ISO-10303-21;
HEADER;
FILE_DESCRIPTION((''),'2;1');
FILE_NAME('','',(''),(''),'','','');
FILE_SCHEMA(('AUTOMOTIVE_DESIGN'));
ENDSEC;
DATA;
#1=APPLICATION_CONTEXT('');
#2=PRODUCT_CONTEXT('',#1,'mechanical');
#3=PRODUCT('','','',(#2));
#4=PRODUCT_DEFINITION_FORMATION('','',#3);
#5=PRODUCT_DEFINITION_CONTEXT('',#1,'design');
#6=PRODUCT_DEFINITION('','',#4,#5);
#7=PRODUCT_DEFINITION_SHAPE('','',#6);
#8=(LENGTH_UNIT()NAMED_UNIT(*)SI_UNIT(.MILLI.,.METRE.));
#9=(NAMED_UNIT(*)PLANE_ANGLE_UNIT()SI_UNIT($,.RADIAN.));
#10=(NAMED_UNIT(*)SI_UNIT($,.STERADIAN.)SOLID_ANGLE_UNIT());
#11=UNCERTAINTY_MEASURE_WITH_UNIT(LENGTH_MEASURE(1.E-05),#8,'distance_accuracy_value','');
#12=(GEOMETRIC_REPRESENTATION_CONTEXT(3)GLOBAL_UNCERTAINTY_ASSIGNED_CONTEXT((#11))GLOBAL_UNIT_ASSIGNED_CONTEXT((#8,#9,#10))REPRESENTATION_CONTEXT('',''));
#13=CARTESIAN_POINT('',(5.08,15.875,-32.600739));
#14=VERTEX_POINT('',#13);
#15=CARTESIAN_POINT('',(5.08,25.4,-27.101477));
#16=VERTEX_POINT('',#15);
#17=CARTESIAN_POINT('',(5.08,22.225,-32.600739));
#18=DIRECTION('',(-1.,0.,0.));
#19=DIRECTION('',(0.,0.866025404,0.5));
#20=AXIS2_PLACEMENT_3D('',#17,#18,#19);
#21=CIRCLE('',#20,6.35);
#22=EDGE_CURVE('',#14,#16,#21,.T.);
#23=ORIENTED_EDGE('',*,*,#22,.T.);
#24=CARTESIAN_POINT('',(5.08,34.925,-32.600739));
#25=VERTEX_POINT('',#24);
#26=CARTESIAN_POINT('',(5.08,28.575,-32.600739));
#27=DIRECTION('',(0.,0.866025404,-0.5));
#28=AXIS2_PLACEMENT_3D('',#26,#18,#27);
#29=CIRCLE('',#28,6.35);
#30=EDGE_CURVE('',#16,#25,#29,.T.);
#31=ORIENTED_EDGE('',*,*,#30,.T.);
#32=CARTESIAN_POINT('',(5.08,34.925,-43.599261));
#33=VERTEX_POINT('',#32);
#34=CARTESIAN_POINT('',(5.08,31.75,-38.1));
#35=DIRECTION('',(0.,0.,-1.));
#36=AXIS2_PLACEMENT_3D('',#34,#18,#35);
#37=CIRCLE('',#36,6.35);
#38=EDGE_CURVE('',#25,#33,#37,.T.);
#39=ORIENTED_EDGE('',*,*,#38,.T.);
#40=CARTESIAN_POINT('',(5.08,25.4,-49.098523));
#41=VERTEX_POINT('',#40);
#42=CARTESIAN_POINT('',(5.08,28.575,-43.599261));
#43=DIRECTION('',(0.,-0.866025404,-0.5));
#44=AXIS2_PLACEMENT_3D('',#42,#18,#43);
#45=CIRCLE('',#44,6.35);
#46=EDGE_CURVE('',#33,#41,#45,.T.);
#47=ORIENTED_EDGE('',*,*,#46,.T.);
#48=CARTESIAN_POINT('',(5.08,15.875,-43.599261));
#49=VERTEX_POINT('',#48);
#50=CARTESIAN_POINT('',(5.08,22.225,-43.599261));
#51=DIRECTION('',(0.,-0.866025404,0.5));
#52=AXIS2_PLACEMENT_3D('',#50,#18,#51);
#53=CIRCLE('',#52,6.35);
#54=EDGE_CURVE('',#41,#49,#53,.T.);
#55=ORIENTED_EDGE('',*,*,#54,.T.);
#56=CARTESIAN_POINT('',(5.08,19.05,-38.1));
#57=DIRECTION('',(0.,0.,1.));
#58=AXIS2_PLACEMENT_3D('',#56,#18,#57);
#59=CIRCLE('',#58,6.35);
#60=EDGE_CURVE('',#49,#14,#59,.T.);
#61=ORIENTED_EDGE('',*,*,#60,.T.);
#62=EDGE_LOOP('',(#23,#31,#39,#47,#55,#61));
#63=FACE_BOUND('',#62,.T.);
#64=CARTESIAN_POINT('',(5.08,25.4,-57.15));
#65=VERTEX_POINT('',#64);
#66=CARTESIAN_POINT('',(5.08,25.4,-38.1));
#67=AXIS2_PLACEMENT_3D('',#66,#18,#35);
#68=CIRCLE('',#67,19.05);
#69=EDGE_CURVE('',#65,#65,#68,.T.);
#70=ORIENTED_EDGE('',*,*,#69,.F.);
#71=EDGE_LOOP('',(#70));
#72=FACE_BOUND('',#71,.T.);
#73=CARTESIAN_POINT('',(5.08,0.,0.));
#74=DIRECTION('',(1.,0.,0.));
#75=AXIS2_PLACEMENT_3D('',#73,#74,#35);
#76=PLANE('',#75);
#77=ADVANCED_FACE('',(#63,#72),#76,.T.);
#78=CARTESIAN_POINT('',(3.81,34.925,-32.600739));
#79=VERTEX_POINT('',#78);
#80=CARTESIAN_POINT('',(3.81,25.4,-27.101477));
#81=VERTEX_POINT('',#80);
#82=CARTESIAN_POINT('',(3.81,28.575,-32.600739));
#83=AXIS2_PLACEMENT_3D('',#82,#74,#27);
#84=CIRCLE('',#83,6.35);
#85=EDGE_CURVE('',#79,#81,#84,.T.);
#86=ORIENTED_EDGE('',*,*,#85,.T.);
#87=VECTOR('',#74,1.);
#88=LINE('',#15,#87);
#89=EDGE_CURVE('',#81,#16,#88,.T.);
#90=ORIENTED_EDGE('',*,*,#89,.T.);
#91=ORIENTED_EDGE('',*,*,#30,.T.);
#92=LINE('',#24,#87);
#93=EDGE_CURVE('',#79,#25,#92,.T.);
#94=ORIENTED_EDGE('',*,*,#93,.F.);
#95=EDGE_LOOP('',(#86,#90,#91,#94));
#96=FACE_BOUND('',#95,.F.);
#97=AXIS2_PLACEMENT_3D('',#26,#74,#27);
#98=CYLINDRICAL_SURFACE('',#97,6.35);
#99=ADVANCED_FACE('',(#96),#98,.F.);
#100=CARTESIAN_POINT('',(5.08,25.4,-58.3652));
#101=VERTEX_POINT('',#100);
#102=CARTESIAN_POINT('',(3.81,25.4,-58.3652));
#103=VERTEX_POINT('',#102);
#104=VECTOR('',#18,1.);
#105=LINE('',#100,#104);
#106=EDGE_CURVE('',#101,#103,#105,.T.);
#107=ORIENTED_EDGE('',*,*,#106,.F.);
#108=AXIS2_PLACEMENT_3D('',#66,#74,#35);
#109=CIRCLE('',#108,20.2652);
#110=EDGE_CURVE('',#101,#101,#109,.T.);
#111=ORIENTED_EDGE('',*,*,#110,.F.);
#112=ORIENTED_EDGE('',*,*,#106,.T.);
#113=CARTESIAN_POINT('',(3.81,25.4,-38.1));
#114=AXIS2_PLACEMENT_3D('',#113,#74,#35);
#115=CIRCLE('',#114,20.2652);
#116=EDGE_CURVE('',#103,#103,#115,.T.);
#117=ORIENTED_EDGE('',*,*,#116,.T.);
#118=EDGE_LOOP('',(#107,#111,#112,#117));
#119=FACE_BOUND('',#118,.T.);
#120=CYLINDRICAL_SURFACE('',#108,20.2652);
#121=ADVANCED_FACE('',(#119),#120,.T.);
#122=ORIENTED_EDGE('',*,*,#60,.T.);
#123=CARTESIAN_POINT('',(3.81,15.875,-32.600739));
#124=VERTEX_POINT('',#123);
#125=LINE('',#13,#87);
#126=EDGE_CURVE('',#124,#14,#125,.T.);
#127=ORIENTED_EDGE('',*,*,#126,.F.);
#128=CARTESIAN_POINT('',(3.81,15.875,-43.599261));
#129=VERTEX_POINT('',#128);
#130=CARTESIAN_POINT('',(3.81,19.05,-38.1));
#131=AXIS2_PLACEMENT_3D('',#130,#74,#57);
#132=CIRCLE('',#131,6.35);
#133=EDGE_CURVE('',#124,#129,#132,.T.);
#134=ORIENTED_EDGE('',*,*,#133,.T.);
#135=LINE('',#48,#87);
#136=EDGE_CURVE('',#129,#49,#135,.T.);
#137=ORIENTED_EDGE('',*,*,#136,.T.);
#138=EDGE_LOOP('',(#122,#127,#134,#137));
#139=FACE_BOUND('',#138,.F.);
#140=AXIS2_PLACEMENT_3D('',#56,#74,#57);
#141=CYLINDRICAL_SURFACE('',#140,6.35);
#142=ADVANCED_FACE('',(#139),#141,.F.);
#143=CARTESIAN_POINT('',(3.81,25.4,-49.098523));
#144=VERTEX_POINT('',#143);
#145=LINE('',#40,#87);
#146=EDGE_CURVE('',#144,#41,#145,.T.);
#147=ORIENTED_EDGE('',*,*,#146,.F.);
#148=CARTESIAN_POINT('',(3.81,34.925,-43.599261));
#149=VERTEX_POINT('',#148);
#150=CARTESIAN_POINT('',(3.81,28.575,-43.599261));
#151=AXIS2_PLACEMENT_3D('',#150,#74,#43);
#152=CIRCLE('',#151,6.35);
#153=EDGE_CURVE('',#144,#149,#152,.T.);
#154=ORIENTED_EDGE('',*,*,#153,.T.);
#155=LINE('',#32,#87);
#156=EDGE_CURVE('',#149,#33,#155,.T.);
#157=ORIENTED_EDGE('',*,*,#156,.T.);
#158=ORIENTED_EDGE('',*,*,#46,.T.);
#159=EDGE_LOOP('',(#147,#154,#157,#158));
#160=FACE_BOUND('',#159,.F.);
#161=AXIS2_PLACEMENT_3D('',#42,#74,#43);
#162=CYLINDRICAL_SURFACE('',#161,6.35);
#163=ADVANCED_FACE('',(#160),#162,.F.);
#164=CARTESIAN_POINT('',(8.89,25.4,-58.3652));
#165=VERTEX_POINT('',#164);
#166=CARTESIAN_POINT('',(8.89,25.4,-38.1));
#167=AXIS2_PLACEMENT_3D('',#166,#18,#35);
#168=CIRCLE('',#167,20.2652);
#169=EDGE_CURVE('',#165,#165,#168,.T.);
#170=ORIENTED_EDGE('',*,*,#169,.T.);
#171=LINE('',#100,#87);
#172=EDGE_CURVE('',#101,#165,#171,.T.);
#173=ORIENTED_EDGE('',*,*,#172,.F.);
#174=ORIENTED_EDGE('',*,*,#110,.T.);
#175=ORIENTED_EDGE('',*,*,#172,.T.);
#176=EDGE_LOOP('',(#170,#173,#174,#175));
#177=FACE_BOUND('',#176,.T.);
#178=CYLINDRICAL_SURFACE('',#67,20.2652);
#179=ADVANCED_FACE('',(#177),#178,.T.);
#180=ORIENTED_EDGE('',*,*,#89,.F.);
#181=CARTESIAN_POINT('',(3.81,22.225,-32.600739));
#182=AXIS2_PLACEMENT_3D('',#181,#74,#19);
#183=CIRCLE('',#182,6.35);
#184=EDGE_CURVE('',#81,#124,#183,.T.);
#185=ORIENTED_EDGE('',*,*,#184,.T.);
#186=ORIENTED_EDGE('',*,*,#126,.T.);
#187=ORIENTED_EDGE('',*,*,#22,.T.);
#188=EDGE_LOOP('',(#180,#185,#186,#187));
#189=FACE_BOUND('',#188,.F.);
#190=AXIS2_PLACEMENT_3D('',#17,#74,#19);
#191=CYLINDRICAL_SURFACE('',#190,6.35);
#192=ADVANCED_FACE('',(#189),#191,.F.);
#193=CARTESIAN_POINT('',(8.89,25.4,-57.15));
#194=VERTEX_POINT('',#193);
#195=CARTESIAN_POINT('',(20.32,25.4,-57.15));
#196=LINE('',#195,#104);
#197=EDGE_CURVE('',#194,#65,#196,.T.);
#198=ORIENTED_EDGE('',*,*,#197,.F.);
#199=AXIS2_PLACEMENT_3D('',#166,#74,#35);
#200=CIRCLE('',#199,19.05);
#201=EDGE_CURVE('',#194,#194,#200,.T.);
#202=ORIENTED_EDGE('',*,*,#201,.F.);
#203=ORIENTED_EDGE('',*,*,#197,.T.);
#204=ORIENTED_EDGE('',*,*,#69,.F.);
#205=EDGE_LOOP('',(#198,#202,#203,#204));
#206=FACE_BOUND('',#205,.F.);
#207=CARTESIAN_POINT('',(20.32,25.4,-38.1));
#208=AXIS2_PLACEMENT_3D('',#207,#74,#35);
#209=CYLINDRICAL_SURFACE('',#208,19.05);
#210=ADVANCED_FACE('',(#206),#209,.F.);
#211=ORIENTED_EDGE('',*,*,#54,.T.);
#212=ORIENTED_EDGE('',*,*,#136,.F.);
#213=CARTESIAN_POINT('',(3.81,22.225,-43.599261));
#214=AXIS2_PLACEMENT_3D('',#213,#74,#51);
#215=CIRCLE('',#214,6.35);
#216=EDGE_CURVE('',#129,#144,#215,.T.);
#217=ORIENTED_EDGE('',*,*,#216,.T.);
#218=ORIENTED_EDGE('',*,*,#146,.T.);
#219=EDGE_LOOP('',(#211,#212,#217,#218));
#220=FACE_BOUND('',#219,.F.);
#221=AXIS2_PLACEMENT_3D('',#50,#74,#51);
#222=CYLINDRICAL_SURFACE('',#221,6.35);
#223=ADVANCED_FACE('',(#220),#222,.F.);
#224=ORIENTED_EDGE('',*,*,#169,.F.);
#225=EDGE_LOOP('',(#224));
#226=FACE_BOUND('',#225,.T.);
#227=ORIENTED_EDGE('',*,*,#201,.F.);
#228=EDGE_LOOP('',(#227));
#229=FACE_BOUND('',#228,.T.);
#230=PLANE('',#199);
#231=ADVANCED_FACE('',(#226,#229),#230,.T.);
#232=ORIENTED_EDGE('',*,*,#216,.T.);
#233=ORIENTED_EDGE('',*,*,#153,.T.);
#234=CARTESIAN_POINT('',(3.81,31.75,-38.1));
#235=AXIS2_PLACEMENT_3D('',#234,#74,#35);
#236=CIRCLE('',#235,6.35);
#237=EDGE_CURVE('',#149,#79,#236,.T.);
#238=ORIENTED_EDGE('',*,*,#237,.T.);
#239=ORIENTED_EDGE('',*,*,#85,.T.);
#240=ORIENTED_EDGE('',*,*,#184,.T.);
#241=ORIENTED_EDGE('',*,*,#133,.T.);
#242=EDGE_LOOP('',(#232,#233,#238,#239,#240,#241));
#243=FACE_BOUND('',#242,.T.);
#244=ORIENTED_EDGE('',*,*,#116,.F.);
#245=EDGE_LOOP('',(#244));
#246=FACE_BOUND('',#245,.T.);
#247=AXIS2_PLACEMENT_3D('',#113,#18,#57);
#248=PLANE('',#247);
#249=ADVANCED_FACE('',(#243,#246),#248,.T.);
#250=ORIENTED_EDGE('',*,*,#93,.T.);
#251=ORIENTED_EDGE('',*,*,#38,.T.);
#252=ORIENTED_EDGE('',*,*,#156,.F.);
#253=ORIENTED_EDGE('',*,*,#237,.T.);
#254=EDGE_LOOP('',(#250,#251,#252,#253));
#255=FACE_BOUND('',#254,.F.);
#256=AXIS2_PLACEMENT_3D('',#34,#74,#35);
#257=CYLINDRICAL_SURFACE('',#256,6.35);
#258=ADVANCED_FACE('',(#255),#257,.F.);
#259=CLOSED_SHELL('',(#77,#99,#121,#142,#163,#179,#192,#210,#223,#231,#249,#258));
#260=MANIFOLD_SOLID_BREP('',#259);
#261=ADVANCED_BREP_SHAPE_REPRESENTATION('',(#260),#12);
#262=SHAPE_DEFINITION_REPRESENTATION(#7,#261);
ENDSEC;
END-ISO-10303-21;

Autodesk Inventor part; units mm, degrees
ref_plane "YZ Plane" through (0, 0, 0) normal (1, 0, 0) x (0, 1, 0)
ref_plane "XZ Plane" through (0, 0, 0) normal (0, 1, 0) x (-1, 0, 0)
ref_plane "XY Plane" through (0, 0, 0) normal (0, 0, 1) x (1, 0, 0)
sketch "Sketch1" plane through (0, 0, 0) normal (0, 1, 0) x (-1, 0, 0)
  line L0 (0, 0) -> (-20.32, 0)
  line L1 (-20.32, 0) -> (-20.32, -76.2)
  line L2 (-20.32, -76.2) -> (0, -76.2)
  line L3 (0, -76.2) -> (0, 0)
  dimension "d0" = 20.32
  dimension "d1" = 76.2
extrude "Extrusion1" add sketch "Sketch1" along normal blind 7.62
sketch "Sketch2" plane through (0, 7.62, 0) normal (0, 1, 0) x (1, 0, 0)
  line L0 (0, 0) -> (0, 12.7)
  line L1 (0, 12.7) -> (20.32, 12.7)
  line L2 (20.32, 12.7) -> (20.32, 63.5)
  line L3 (20.32, 63.5) -> (0, 63.5)
  line L4 (0, 63.5) -> (0, 12.7)
  dimension "d4" = 12.7
  dimension "d5" = 20.32
  dimension "d6" = 50.8
extrude "Extrusion2" add sketch "Sketch2" along normal blind 43.18
sketch "Sketch3" plane through (20.32, 0, 0) normal (1, 0, 0) x (0, 0, -1)
  line L0 (12.7, 50.8) -> (63.5, 50.8) projected
  line L1 (38.1, 50.8) -> (38.1, 25.4)
  circle A0 centre (38.1, 25.4) radius 19.05
  point P0 (0, 0)
  dimension "d9" = 25.4
  dimension "d10" = 38.1
extrude "Extrusion3" cut sketch "Sketch3" against normal blind 15.24
fillet "Fillet1" radius 25.4 2 edges at (10.16, 50.8, -63.5) (10.16, 50.8, -12.7)
sketch "Sketch6" plane through (0, 7.62, 0) normal (0, 1, 0) x (1, 0, 0)
  line L0 (0, 0) -> (20.32, 0) projected
  line L1 (10.16, 0) -> (10.16, 6.35)
  line L2 (20.32, 76.2) -> (0, 76.2) projected
  line L3 (10.16, 76.2) -> (10.16, 69.85)
  dimension "d20" = 6.35
  dimension "d21" = 6.35
fillet "Fillet2" radius 25.4 2 edges at (10.16, 7.62, -63.5) (10.16, 7.62, -12.7)
hole "Hole1" at (10.16, 7.62, -6.35) at (10.16, 7.62, -69.85) direction (0, -1, 0) diameter 5.08 end through all counterbore diameter 10.16 counterbore depth 3.81
sketch "Sketch7" plane through (10.16, 7.62, -6.35) normal (0, -1, 0) x (1, 0, 0)
  circle A0 centre (0, 0) radius 5.08
  circle A1 centre (0, -63.5) radius 2.54 projected
  line L0 (-2.54, -63.5) -> (0, -63.5)
  circle A2 centre (0, -63.5) radius 5.08
  point P0 (-10.16, 6.35)
  dimension "d30" = 10.16
  dimension "d31" = 10.16
extrude "Extrusion5" cut sketch "Sketch7" against normal blind 15.24 contours A0 | A1 | A2
sketch "Sketch10" plane through (5.08, 25.4, -38.1) normal (1, 0, 0) x (0, 0, -1)
  line L0 (0, 0) -> (0, 6.35)
  circle A0 centre (0, 6.35) radius 6.35
  line L1 (0, 0) -> (-7.874, 13.6382)
  line L2 (0, 0) -> (15.748, 0) construction
  line L3 (0, 0) -> (7.874, 13.6382)
  line L4 (0, 0) -> (15.748, 0) construction
  circle A1 centre (-7.874, 13.6382) radius 1.651
  circle A2 centre (7.874, 13.6382) radius 1.651
  point P0 (-38.1, -25.4)
  dimension "d65" = 6.35
  dimension "d85" = 15.748
  dimension "d86" = 120
  dimension "d87" = 15.748
  dimension "d88" = 60
  dimension "d89" = 3.302
  dimension "d90" = 3.302
extrude "Extrusion8" cut sketch "Sketch10" against normal blind 25.4 contours L3 A0 | A0 L1 | L1 A0 L3
sketch "Sketch13" plane through (5.08, 25.4, -38.1) normal (1, 0, 0) x (0, 0, -1)
  circle A0 centre (0, 6.35) radius 6.35 projected
  point P0 (-38.1, -25.4)
  point P1 (0, 0)
pattern_circular "Circular Pattern3" count 6 over 360 about axis through (5.08, 25.4, -38.1) along (1, 0, 0) of "Extrusion8"
sketch "Sketch14" plane through (5.08, 25.4, -38.1) normal (1, 0, 0) x (0, 0, -1)
  circle A0 centre (0, 0) radius 20.2652
  circle A1 centre (0, 0) radius 51.9893
  point P0 (-38.1, -25.4)
extrude "Extrusion10" cut sketch "Sketch14" against normal mid plane 50.8
sketch "Sketch15" plane through (20.32, 25.4, -38.1) normal (1, 0, 0) x (0, 0, -1)
  circle A0 centre (0, 0) radius 23.435
  point P0 (-38.1, -25.4)
extrude "Extrusion11" cut sketch "Sketch15" against normal blind 11.43
sketch "Sketch16" plane through (0, 25.4, -38.1) normal (-1, 0, 0) x (0, 0, 1)
  circle A0 centre (0, 0) radius 24.6265
  point P0 (38.1, -25.4)
extrude "Extrusion12" cut sketch "Sketch16" against normal blind 3.81
properties part number "Motor Mount V2"
